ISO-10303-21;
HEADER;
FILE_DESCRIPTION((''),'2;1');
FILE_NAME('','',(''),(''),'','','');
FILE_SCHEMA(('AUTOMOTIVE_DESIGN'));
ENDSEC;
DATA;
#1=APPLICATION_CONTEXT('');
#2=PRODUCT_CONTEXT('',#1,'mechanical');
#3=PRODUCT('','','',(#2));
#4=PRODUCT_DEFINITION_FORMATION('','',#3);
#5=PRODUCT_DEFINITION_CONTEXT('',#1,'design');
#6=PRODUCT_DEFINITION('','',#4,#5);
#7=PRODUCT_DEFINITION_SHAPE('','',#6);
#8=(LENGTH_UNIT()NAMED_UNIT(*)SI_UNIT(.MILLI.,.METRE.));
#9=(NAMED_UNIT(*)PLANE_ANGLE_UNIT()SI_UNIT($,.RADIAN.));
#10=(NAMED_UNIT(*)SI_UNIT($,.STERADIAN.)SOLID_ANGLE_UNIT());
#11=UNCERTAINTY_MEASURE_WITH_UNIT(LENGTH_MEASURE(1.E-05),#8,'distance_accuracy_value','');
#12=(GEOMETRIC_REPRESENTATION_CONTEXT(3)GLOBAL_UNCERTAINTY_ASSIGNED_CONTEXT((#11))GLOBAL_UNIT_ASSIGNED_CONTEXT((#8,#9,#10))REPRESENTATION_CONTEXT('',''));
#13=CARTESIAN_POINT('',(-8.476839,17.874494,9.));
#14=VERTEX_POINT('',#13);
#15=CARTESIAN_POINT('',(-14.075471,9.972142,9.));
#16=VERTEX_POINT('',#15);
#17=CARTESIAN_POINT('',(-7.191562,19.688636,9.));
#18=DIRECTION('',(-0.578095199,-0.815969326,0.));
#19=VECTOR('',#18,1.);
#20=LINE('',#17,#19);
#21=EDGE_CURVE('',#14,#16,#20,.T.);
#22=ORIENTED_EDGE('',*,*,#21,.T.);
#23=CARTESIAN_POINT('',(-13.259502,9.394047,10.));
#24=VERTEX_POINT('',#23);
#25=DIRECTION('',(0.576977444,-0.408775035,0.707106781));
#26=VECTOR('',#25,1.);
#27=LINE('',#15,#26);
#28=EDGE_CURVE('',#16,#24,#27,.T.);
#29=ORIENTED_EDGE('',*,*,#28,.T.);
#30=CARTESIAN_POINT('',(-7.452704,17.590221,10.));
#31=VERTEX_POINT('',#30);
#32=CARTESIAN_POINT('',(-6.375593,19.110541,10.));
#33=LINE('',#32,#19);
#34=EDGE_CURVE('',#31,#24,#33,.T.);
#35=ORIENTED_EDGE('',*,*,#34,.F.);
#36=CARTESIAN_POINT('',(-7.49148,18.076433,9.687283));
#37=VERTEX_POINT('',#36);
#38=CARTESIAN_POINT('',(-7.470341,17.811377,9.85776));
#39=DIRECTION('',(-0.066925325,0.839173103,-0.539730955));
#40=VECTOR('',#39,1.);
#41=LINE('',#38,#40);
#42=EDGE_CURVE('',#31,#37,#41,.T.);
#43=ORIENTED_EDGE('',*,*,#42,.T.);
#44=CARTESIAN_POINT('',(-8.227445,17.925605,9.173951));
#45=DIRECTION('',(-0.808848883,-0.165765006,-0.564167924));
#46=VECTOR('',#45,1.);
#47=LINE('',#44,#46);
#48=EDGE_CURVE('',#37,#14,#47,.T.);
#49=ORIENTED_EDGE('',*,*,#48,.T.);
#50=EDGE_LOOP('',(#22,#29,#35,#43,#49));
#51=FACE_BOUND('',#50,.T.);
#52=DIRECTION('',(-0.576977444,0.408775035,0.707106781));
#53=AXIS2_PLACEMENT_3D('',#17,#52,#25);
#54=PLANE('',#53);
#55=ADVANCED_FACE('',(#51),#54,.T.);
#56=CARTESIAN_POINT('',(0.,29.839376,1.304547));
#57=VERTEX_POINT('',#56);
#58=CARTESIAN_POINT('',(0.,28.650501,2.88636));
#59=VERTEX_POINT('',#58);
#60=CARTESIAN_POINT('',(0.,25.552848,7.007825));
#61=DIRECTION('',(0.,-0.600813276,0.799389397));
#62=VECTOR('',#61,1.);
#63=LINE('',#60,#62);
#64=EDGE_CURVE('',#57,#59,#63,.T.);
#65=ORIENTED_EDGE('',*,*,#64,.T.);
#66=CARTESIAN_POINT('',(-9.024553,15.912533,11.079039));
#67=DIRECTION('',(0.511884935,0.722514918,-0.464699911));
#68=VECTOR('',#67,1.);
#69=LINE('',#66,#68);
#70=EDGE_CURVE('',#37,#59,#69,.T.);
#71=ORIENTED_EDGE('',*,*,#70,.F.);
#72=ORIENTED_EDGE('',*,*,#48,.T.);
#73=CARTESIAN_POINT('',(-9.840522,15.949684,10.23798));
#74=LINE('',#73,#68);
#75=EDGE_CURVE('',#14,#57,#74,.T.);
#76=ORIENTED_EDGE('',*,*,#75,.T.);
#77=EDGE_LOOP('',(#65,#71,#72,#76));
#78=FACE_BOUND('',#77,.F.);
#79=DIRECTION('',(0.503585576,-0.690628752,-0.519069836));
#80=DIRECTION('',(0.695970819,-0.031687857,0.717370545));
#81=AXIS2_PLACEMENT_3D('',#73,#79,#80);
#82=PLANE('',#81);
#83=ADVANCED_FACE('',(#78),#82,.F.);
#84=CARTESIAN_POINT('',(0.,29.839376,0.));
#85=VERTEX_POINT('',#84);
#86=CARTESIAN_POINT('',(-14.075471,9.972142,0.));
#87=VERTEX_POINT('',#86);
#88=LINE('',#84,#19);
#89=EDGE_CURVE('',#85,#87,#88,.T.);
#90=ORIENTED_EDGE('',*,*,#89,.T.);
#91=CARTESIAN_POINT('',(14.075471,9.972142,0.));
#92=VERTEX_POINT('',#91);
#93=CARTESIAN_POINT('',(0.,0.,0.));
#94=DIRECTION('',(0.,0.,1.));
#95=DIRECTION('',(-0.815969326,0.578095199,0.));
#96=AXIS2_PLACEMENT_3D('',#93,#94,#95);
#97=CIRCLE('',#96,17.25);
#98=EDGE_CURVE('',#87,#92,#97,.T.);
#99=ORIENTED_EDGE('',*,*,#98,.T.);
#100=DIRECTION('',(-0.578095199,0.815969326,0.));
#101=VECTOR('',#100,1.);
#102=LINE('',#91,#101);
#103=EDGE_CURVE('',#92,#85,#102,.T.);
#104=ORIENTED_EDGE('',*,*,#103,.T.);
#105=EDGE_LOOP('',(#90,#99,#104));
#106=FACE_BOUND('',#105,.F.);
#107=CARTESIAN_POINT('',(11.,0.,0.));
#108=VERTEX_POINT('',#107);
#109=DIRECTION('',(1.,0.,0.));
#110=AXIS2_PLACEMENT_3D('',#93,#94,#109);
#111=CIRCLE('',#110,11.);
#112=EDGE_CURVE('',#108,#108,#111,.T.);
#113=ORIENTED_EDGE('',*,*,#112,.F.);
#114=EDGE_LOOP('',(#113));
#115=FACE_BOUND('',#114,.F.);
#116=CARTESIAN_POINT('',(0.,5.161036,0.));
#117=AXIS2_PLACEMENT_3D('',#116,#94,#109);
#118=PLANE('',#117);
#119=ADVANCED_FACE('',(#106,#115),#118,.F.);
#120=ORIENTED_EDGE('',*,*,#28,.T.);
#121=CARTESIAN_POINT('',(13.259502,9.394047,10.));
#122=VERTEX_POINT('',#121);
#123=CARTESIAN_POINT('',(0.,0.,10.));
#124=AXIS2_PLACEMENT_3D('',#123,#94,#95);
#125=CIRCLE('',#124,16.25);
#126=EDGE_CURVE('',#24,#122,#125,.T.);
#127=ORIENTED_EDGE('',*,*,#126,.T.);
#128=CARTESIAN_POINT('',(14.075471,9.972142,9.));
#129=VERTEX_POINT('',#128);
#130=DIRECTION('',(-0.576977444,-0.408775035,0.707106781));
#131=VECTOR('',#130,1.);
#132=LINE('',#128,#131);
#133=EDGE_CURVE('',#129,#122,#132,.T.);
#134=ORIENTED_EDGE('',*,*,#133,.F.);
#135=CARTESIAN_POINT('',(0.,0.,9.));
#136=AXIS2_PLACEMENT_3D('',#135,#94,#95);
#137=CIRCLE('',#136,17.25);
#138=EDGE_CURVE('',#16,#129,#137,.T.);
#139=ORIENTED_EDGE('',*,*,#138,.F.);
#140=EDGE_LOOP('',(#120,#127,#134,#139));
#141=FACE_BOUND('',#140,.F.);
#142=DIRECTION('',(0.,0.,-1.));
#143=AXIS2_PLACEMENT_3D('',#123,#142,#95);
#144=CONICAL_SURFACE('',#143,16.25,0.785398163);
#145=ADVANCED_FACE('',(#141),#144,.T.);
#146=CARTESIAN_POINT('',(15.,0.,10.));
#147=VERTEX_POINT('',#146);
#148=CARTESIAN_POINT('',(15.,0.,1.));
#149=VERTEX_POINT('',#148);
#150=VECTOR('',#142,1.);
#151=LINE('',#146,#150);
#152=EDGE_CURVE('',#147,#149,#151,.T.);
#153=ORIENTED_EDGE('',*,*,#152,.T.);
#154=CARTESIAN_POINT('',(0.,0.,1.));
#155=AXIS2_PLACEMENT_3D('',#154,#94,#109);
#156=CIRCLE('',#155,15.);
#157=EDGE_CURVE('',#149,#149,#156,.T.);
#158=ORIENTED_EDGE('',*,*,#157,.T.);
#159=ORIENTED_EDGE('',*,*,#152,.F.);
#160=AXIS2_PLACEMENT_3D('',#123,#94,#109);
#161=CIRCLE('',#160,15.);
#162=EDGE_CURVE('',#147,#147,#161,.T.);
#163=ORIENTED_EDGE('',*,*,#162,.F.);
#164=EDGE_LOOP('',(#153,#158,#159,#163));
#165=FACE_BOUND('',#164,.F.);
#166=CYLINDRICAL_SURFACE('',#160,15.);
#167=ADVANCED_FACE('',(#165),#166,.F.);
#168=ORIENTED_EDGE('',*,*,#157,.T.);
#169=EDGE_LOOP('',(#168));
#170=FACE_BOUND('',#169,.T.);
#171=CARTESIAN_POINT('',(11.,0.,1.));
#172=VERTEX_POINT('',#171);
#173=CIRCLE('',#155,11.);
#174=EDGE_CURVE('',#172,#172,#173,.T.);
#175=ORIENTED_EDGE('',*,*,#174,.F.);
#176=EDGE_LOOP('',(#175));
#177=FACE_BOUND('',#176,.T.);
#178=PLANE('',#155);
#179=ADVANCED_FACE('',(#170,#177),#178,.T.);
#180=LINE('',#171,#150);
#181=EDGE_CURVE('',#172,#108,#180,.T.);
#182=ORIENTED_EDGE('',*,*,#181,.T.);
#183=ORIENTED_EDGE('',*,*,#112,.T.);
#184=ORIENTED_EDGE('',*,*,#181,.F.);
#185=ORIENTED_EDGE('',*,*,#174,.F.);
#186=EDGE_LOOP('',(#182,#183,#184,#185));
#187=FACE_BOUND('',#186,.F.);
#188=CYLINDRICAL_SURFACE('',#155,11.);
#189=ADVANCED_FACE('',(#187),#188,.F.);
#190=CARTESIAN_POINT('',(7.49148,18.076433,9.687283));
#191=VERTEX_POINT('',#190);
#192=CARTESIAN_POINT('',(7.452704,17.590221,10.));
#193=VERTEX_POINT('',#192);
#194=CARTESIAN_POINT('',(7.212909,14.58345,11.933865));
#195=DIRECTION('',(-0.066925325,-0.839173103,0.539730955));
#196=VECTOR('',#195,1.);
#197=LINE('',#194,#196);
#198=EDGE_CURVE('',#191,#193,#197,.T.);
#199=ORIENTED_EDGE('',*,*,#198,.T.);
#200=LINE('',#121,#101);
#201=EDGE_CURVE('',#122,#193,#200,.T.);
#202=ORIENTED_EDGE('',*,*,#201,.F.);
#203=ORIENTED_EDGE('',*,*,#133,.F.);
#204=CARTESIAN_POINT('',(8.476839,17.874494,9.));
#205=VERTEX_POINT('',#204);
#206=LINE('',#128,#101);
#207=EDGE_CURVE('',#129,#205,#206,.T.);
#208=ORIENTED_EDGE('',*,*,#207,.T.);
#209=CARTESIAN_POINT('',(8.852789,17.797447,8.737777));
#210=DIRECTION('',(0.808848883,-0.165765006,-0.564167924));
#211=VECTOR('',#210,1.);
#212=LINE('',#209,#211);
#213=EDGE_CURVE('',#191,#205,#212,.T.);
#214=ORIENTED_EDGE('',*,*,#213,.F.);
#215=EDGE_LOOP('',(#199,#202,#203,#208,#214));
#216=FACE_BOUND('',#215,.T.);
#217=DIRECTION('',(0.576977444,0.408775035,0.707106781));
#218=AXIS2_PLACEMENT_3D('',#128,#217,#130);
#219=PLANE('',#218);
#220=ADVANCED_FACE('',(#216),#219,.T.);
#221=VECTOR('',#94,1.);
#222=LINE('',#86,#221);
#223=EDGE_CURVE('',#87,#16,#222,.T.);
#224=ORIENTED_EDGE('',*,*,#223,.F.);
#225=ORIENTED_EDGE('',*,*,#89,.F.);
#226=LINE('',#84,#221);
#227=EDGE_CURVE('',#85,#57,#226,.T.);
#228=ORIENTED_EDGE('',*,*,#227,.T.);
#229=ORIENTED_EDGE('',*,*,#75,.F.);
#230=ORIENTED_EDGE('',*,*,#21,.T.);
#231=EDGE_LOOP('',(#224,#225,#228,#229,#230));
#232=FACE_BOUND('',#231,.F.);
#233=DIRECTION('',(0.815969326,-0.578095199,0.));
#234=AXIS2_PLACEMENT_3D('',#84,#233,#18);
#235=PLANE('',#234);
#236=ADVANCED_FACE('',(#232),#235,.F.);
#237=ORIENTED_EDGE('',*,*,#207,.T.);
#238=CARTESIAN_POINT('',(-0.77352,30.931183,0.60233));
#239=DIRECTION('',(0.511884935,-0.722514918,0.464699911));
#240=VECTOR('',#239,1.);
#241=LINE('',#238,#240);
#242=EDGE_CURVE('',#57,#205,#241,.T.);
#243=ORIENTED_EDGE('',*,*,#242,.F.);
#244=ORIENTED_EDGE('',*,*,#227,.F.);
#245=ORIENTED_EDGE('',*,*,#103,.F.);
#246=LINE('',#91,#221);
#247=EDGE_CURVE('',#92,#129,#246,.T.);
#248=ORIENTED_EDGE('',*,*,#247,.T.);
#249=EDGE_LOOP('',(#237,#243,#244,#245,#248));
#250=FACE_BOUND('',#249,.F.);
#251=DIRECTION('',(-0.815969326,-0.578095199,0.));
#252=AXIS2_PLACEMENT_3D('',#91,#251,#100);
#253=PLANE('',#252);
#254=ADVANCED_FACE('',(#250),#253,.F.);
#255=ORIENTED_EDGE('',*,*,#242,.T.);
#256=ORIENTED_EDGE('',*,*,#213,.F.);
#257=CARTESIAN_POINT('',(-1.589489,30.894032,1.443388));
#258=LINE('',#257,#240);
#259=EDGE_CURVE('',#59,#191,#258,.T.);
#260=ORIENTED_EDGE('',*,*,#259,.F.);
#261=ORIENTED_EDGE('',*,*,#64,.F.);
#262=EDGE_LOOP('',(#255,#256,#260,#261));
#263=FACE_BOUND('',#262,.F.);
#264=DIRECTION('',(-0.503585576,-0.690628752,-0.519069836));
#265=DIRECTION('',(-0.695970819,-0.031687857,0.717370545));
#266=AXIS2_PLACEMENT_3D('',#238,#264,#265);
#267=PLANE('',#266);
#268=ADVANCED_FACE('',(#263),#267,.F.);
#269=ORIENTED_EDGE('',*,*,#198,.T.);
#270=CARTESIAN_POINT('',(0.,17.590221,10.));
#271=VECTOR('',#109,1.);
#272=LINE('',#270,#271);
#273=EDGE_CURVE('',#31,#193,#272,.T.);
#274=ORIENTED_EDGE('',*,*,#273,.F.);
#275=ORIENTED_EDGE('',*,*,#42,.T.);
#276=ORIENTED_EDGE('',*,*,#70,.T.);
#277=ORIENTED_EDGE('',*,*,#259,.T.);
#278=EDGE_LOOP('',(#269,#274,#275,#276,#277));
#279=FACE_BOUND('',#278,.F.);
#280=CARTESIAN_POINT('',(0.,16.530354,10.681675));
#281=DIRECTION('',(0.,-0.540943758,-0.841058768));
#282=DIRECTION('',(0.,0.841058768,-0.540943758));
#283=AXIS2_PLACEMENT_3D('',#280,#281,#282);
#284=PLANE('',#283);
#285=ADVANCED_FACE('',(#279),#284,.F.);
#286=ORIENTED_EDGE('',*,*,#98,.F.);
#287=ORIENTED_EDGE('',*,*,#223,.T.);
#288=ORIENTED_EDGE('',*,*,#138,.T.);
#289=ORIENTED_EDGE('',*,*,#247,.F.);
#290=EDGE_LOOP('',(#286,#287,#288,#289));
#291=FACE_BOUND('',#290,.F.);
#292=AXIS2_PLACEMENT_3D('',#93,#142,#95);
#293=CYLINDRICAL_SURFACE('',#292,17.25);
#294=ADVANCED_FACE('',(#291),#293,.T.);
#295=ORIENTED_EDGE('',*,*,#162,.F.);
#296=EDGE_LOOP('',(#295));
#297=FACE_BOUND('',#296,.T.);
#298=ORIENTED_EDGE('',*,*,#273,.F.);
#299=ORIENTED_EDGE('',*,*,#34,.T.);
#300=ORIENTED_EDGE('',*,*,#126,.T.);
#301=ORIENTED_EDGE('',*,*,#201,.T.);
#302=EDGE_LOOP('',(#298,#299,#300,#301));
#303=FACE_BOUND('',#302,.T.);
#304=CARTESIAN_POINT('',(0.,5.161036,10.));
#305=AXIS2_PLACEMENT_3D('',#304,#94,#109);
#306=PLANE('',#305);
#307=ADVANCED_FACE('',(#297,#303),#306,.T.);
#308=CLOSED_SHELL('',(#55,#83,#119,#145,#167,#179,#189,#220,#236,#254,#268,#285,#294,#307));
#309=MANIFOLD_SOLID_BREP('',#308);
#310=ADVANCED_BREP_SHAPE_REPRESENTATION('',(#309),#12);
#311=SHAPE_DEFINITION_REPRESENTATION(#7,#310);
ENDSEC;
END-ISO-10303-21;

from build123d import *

# Parameters (mm, degrees)
F0_R         = 14.75
F0_R_2       = 11
F1_DEPTH     = 0.5
F3_DEPTH     = 10
F4_R         = 15
F5_DEPTH     = 9
F8_DEPTH     = 12.5
F9_T1_DEPTH  = 11.9079151816
F9_T3_DEPTH  = 20.7352111954
F9_T5_DEPTH  = 20.7352111954
F9_T7_DEPTH  = 11.9079151816
F9_T10_ANGLE = 250.6333606171
F6_R         = 11
F10_DEPTH    = 25


# Not quite as in the source:
# - a fillet or chamfer that OpenCascade refuses, or shapes differently, is made with other operations: its cross-section is extruded or revolved along the edge and cut away or added


with BuildPart() as f1:
    # F0 (on Top) → F1 (new body)
    with BuildSketch(Plane.XY):
        Circle(F0_R)
        Circle(F0_R_2, mode=Mode.SUBTRACT)
    extrude(amount=F1_DEPTH)

    # F2 (on Top) → F3 (join)
    with BuildSketch(Plane.XY):
        with BuildLine():
            Line((0, 29.8393759876), (-14.0754708725, 9.972142183))
            ThreePointArc((-14.0754708725, 9.972142183), (0, -17.25), (14.0754708725, 9.972142183))
            Line((14.0754708725, 9.972142183), (0, 29.8393759876))
        make_face()
    extrude(amount=F3_DEPTH)

    # F4 (on face) → F5 (cut)
    with BuildSketch(Plane.XY.offset(10)):
        Circle(F4_R)
    extrude(amount=-F5_DEPTH, mode=Mode.SUBTRACT)

    # F7 (on Right) → F8 (cut, symmetric)
    with BuildSketch(Plane.YZ):
        Polygon((30.5235402449, 1.681677395), (30.5303540081, 10.6816748157), (16.5303540081, 10.6816748157), align=None)
    extrude(amount=F8_DEPTH, both=True, mode=Mode.SUBTRACT)

    # F9: chamfer of 1 on 5 edges, made by hand

    # F9_s2 → F9_t1 (cut)
    with BuildSketch(Plane(origin=(0, 0, 0), x_dir=(0, 0, 1), z_dir=(-0.578095199, 0.8159693259, 0))):
        Polygon((9, 17.25), (10, 16.25), (10, 17.25), align=None)
    extrude(amount=F9_T1_DEPTH, mode=Mode.SUBTRACT)

    # F9_s4 → F9_t3 (cut)
    with BuildSketch(Plane(origin=(-11.4991327342, 16.2307862132, -10.4391545701), x_dir=(0.8159693259, 0.578095199, 0), z_dir=(0.5118849348, -0.7225149178, 0.4646999108))):
        Polygon((17.25, 12.4696557739), (16.5627169892, 13.4195021219), (17.25, 13.1932286048), align=None)
    extrude(amount=F9_T3_DEPTH, mode=Mode.SUBTRACT)

    # F9_s6 → F9_t5 (cut)
    with BuildSketch(Plane(origin=(0.8850905039, 1.2492868011, -0.8035037766), x_dir=(-0.8159693259, 0.578095199, 0), z_dir=(0.5118849348, 0.7225149178, -0.4646999108))):
        Polygon((17.25, 12.4696557739), (16.5627169892, 13.4195021219), (17.25, 13.1932286048), align=None)
    extrude(amount=F9_T5_DEPTH, mode=Mode.SUBTRACT)

    # F9_s8 → F9_t7 (cut)
    with BuildSketch(Plane(origin=(6.8839085967, 9.7164935241, 0), x_dir=(0, 0, 1), z_dir=(-0.578095199, -0.8159693259, 0))):
        Polygon((9, 17.25), (10, 16.25), (10, 17.25), align=None)
    extrude(amount=F9_T7_DEPTH, mode=Mode.SUBTRACT)

    # F9_s9 → F9_t10 (revolve, cut)
    with BuildSketch(Plane(origin=(0, 0, 0), x_dir=(0, 0, 1), z_dir=(0.578095199, 0.8159693259, 0))):
        Polygon((10, -16.25), (9, -17.25), (10, -17.25), align=None)
    revolve(axis=Axis((0, 0, 10), (0, 0, 1)), revolution_arc=F9_T10_ANGLE, mode=Mode.SUBTRACT)

    # F6 (on face) → F10 (cut)
    with BuildSketch(Plane.XY.offset(1)):
        Circle(F6_R)
    extrude(amount=-F10_DEPTH, mode=Mode.SUBTRACT)


solid = f1.part
